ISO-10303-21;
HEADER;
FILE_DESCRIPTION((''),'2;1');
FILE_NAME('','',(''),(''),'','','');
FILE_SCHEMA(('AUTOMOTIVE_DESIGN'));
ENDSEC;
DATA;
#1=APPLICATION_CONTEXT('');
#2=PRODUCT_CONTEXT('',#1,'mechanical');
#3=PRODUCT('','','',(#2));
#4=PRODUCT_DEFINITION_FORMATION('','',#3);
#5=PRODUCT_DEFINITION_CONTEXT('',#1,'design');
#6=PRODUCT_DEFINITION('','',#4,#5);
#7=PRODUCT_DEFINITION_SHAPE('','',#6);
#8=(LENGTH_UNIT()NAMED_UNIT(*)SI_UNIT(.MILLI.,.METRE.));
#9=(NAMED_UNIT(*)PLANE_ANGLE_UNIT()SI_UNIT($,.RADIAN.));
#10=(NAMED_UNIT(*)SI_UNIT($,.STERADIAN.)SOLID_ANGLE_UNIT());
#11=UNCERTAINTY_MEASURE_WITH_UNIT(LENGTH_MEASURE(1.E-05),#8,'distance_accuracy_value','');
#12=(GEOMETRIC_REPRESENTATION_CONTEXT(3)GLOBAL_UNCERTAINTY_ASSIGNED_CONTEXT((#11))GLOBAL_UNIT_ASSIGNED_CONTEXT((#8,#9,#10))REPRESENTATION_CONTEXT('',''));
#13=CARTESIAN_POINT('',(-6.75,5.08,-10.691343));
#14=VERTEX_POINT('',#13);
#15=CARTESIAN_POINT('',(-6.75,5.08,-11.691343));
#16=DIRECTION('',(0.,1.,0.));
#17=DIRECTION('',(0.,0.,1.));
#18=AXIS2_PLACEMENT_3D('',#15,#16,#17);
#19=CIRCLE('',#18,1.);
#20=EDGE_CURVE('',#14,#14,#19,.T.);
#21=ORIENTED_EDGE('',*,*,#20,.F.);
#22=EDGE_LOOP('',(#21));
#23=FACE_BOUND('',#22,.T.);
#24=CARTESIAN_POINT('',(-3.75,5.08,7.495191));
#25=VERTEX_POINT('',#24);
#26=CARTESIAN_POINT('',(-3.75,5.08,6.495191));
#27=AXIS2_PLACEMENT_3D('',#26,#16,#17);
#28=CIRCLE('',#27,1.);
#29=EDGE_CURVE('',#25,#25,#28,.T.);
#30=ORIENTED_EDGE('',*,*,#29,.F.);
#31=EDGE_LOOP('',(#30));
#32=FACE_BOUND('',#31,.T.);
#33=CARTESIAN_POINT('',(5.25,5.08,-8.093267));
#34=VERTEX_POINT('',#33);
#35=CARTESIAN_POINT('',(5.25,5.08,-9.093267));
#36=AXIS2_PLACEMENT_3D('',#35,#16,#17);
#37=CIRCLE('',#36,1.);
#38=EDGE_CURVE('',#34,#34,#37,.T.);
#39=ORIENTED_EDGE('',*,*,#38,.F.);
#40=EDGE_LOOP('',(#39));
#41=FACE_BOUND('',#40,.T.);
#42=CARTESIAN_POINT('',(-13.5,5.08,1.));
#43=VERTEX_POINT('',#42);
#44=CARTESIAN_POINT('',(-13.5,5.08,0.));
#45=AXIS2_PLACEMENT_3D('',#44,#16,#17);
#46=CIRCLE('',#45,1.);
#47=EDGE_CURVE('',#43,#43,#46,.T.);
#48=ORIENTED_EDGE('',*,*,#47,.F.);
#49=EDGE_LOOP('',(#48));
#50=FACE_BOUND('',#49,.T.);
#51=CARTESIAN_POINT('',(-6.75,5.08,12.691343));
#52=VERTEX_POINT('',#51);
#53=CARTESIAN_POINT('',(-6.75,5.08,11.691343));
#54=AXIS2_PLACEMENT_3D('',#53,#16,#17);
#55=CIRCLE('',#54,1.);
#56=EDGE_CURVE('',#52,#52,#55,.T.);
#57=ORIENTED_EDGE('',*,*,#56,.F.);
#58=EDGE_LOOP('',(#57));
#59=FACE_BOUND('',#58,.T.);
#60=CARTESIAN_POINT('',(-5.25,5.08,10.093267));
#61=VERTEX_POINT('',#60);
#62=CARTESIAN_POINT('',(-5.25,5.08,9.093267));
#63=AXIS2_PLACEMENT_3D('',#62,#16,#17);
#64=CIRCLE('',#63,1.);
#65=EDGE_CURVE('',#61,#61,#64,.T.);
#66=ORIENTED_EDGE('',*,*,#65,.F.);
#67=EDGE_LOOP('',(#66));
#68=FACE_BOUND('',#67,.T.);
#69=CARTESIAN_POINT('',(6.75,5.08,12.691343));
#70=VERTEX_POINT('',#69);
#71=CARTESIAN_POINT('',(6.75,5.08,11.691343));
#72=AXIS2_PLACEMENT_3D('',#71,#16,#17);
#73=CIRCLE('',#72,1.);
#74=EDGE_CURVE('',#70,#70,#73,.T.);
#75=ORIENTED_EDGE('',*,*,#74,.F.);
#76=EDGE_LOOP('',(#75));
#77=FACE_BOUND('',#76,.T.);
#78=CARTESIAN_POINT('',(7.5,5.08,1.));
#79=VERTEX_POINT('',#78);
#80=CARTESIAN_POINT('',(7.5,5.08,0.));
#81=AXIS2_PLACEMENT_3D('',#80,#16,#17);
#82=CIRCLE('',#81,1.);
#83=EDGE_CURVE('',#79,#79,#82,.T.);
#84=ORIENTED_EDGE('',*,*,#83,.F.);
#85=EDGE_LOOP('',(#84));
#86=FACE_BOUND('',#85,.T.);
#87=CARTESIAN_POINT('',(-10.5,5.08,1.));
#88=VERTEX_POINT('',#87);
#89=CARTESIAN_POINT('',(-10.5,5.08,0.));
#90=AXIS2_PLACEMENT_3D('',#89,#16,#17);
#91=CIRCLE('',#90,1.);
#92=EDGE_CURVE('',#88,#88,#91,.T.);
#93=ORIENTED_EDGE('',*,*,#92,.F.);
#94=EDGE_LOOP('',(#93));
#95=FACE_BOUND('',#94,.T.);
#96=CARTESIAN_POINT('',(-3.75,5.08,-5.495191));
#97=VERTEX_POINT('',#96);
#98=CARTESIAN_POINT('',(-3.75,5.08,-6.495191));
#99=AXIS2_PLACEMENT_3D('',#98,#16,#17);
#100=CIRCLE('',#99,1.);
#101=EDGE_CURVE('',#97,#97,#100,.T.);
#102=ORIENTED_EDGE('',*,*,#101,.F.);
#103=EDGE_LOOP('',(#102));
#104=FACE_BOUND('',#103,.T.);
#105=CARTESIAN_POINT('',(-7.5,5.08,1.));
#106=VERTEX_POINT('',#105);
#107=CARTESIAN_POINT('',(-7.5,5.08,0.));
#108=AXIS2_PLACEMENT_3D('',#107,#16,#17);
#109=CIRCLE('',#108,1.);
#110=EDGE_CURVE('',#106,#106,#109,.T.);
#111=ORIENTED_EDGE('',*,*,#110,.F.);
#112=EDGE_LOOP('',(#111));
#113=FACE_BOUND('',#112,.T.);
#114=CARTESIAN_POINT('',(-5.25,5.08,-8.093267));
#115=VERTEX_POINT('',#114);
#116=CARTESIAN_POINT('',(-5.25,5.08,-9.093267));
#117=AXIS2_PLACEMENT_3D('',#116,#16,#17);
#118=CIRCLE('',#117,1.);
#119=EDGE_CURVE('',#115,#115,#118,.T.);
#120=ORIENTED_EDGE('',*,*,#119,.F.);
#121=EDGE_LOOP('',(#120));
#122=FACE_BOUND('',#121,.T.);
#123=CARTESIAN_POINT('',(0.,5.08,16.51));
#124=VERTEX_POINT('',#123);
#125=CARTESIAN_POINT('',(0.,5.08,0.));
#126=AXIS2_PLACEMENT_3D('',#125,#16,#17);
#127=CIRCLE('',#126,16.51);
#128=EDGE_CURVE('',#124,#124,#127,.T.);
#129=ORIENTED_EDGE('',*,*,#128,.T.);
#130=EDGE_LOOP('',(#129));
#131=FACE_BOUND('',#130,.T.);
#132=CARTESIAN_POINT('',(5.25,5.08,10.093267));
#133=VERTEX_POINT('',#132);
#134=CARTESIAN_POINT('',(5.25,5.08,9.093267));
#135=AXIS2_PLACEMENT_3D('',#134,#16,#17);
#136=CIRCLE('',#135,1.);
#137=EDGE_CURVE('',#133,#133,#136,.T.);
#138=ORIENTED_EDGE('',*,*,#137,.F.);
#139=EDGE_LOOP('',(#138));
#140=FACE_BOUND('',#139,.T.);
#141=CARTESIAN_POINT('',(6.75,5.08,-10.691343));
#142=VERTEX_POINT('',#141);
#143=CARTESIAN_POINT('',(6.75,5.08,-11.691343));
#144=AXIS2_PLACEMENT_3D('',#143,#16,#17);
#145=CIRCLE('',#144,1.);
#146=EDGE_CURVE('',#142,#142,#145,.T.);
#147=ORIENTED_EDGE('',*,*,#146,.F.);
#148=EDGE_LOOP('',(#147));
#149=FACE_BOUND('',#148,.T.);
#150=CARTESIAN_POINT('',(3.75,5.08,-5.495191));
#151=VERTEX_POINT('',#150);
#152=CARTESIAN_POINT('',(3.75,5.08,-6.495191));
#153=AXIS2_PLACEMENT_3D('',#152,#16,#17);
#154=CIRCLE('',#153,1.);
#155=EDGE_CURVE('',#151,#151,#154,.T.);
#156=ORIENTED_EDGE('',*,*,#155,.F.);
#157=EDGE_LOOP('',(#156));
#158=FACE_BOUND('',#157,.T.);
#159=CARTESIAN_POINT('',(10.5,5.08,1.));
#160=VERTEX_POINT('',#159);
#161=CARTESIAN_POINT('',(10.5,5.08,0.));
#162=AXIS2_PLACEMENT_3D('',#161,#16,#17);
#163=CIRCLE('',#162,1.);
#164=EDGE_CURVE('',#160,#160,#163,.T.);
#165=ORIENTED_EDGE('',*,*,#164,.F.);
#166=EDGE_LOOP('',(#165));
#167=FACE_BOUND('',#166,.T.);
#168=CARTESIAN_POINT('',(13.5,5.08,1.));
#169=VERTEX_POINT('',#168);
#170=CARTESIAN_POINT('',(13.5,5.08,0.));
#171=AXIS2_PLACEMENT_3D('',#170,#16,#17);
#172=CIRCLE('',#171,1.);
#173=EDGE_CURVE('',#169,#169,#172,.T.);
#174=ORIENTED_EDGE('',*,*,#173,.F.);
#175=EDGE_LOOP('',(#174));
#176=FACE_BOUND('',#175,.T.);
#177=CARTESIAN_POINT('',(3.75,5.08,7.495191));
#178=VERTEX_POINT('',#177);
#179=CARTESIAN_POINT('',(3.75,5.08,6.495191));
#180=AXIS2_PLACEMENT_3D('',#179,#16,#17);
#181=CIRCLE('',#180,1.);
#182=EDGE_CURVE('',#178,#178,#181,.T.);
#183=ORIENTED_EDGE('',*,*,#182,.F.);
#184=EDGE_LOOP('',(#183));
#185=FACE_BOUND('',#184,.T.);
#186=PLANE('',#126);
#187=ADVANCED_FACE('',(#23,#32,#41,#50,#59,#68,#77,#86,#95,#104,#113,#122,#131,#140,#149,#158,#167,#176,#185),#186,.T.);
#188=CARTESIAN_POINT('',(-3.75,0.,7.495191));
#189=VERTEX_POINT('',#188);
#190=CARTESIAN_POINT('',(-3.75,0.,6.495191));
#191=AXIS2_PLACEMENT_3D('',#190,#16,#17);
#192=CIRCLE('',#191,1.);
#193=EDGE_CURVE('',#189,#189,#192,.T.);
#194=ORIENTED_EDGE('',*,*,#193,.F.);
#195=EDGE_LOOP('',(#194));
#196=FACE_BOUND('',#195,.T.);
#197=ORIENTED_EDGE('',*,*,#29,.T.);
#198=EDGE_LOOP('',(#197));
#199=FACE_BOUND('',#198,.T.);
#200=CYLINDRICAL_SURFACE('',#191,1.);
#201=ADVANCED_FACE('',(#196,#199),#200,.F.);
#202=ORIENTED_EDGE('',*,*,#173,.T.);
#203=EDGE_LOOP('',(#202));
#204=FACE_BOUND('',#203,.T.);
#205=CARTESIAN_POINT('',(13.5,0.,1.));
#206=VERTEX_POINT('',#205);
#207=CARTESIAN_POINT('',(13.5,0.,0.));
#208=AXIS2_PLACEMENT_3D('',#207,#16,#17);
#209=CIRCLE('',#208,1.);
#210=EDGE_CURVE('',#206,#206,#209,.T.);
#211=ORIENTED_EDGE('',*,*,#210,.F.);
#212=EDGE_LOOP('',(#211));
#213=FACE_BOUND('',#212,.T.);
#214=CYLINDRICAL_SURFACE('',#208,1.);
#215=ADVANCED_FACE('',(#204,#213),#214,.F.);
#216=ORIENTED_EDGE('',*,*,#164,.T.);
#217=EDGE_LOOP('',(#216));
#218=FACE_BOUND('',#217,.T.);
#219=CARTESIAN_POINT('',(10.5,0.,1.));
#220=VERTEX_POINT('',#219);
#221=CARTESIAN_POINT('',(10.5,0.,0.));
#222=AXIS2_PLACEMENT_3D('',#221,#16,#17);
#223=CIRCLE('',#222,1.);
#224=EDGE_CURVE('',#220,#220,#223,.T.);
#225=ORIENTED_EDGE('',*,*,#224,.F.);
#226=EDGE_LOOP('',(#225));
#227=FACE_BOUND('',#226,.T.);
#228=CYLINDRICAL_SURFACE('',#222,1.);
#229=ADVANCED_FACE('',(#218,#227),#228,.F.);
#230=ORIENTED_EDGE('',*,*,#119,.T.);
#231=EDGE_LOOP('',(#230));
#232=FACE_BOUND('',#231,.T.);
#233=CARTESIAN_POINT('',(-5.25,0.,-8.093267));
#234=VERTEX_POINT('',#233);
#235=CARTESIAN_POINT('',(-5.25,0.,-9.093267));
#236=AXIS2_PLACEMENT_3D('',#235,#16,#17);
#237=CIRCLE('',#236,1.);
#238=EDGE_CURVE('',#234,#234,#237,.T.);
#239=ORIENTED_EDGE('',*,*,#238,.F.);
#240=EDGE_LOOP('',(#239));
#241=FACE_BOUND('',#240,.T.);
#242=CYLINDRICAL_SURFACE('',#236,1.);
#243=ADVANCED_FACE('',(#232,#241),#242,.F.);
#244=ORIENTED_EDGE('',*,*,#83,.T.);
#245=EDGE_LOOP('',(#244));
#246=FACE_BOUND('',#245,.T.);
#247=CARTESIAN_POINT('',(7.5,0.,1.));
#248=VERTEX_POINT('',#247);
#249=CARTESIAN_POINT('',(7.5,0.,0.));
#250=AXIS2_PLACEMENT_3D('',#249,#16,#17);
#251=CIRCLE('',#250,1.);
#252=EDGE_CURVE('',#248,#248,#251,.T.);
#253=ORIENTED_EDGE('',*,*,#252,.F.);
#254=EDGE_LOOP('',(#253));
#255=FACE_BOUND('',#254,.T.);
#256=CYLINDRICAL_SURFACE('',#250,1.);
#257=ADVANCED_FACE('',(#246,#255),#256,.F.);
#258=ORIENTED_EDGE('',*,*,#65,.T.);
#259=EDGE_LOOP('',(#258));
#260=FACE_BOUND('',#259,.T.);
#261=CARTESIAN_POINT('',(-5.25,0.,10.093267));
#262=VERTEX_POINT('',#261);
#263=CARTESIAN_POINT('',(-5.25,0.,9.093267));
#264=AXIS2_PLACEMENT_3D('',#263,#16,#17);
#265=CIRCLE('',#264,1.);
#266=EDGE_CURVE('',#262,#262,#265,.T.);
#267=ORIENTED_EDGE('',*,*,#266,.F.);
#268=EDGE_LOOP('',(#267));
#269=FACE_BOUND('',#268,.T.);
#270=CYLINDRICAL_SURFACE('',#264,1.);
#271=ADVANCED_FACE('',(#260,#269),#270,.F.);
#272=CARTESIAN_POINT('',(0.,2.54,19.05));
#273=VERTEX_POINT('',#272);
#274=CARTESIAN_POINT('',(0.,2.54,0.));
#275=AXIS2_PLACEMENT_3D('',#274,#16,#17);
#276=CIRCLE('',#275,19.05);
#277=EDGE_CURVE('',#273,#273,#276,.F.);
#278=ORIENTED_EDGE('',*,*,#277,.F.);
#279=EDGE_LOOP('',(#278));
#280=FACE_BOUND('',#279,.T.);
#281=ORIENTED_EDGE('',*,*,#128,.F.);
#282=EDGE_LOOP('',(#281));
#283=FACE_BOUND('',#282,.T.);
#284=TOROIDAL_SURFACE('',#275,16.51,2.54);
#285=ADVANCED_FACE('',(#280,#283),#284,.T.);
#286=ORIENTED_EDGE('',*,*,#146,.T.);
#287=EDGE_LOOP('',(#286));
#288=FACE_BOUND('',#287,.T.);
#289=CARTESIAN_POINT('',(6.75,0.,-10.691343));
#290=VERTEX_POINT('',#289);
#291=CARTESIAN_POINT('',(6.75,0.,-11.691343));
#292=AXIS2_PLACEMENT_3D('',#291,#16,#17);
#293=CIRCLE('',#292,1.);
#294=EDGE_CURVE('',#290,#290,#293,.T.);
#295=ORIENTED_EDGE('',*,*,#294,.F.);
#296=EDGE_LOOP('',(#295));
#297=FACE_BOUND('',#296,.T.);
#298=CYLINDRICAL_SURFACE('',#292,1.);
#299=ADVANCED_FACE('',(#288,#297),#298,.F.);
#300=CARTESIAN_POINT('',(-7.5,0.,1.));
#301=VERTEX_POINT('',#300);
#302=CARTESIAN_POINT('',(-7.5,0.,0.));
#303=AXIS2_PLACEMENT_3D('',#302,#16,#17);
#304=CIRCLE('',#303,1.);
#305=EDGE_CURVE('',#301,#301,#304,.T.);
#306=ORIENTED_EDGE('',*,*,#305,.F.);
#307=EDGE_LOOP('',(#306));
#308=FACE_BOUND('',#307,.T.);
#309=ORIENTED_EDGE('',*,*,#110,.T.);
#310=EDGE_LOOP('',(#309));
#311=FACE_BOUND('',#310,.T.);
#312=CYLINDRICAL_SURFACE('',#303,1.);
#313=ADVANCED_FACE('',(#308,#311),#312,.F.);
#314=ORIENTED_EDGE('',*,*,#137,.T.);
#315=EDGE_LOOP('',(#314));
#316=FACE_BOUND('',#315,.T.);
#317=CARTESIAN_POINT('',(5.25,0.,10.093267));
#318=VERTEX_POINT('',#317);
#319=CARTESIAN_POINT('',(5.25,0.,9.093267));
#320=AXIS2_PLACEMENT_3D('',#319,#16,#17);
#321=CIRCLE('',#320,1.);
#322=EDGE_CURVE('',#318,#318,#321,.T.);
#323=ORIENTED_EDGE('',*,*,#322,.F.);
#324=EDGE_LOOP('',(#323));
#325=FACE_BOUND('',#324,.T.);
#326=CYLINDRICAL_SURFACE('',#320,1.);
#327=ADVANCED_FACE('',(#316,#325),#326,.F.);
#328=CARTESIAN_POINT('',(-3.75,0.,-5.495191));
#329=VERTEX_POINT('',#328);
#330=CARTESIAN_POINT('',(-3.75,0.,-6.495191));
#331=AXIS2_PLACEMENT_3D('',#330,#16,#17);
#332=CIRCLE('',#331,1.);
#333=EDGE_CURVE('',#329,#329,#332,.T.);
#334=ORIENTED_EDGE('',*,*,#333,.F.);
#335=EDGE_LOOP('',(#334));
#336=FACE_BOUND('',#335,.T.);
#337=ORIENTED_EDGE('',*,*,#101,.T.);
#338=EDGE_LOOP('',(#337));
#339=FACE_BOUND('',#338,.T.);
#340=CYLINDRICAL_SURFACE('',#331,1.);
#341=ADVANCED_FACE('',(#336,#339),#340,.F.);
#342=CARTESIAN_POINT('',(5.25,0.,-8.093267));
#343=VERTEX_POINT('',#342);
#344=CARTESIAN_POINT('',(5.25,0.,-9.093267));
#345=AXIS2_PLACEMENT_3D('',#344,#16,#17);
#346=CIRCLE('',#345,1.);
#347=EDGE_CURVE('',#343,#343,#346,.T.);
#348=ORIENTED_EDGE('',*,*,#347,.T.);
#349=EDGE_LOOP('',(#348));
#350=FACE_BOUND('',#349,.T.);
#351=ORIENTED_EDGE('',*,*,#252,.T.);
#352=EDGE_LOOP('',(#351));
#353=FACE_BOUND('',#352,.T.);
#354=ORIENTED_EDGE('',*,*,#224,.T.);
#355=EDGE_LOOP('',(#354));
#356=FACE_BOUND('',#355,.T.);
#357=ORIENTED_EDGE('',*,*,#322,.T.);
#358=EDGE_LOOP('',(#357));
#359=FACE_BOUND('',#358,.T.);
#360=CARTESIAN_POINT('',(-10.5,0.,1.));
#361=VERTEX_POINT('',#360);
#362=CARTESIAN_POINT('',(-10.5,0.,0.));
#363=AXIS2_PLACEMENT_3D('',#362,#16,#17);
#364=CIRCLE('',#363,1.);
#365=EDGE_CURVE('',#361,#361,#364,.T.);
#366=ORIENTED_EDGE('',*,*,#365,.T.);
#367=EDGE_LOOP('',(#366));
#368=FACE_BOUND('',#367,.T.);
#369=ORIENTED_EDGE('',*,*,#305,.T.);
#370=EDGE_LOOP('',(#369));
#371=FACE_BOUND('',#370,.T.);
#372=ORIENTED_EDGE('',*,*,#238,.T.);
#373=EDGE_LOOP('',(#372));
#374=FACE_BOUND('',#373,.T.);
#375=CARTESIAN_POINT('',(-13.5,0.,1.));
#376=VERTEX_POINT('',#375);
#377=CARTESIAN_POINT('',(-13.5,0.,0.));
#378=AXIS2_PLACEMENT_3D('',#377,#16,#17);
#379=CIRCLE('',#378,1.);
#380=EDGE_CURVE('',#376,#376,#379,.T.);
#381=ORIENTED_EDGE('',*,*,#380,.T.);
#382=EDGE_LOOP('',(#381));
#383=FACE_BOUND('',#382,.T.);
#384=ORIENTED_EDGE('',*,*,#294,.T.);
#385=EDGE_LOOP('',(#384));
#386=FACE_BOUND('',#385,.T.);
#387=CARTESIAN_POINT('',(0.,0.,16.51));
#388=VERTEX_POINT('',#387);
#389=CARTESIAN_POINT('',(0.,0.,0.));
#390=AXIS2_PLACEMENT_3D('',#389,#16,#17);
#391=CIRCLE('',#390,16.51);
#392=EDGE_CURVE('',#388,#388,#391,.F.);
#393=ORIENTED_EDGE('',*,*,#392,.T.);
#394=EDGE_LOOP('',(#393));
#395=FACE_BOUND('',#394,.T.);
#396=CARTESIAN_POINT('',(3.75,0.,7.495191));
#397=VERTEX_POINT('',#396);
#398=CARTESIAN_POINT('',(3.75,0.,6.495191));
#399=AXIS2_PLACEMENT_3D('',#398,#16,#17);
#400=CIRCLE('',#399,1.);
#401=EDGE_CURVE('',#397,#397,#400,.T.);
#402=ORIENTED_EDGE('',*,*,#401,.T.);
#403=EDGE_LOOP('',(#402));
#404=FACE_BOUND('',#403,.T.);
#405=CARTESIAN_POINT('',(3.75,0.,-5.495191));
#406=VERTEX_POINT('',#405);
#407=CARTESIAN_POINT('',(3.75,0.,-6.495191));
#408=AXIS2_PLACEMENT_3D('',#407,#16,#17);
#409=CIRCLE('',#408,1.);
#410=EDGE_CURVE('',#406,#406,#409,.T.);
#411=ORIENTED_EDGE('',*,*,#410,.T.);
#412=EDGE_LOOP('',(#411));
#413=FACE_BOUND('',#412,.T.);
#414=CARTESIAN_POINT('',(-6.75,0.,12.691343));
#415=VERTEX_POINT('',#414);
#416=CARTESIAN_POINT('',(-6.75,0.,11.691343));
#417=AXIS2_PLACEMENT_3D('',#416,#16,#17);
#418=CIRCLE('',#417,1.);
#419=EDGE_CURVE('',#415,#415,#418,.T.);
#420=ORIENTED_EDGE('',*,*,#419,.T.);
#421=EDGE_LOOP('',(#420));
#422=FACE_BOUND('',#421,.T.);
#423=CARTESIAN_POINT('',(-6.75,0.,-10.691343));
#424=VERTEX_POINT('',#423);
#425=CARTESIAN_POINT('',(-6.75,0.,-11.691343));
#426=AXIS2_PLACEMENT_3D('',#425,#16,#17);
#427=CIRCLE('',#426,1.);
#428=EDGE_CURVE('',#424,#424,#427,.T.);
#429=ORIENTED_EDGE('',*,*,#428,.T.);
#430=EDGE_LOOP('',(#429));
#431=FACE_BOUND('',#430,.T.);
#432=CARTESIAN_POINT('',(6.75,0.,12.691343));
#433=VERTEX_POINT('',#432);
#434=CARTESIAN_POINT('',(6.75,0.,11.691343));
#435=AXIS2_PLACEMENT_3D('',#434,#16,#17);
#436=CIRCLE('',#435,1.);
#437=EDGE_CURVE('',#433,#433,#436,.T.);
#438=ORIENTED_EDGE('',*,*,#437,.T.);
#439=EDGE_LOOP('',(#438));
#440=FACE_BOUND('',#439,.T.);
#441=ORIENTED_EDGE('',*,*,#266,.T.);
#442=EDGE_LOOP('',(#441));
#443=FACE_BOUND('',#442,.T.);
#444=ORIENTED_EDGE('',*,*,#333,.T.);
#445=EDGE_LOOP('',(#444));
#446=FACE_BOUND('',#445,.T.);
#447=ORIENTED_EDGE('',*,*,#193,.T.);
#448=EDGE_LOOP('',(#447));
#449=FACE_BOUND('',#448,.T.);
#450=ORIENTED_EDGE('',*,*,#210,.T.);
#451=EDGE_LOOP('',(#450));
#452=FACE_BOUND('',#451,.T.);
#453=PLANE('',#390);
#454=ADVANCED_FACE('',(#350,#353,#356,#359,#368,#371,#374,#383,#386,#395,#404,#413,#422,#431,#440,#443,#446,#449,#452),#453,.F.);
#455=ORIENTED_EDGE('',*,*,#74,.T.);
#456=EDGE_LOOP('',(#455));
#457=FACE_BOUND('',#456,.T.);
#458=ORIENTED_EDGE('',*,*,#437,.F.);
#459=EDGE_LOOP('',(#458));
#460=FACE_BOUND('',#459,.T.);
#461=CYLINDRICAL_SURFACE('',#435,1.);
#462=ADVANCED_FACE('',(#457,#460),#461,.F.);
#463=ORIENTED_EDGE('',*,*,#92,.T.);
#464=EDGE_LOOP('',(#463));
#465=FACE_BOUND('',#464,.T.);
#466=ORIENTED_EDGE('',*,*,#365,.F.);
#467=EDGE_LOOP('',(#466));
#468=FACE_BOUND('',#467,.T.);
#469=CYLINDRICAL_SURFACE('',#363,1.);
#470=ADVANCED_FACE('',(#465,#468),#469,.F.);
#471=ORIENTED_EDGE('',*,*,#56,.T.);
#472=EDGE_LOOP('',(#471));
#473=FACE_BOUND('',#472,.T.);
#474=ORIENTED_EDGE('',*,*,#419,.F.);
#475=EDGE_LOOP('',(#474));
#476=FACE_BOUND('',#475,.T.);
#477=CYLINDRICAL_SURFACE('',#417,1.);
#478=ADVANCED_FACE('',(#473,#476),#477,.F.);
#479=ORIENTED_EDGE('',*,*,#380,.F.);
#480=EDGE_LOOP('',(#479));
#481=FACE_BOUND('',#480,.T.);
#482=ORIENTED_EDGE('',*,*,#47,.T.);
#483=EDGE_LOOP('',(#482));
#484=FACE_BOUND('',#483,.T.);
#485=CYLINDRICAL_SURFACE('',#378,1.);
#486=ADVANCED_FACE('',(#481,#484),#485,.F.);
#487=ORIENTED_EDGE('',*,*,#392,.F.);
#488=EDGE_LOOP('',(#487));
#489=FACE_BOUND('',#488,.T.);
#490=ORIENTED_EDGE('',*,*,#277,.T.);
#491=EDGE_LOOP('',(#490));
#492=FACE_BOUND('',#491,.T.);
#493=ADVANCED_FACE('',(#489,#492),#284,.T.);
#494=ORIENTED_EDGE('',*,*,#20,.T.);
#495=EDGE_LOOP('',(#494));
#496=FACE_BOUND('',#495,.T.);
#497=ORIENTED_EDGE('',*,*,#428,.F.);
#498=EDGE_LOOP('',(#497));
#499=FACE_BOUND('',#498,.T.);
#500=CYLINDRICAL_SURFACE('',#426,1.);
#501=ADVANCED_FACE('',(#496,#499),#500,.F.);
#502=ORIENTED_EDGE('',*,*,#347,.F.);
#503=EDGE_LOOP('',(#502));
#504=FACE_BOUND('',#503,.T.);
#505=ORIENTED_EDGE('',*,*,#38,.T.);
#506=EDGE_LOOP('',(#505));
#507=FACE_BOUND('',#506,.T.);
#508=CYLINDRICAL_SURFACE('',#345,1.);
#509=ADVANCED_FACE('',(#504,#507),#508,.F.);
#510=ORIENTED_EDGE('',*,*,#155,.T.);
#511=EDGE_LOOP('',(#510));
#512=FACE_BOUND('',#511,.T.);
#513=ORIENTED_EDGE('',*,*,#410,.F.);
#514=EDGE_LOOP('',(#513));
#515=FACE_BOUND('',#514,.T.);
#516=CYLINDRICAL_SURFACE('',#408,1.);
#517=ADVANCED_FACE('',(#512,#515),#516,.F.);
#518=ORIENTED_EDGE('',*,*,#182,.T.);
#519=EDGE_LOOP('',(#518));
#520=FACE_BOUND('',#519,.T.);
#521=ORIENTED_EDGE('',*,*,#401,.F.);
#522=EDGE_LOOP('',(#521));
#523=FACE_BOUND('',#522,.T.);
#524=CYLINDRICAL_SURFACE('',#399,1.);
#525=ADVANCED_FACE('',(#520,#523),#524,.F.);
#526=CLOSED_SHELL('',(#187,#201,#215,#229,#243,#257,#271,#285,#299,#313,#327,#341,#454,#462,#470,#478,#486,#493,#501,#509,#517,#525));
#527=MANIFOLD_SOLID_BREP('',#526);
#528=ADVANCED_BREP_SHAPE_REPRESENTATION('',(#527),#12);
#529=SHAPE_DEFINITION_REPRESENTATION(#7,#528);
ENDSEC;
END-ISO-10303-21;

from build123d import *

# Parameters (mm, degrees)
SKETCH2_R           = 19.05
BOSS_EXTRUDE1_DEPTH = 5.08
SKETCH3_R           = 1
CUT_EXTRUDE1_DEPTH  = 28.415532094
FILLET1_R           = 2.54


with BuildPart() as part:
    # Sketch2 → Boss-Extrude1 (new body)
    with BuildSketch(Plane(origin=(0, 0, 0), x_dir=(1, 0, 0), z_dir=(0, 1, 0))):
        with Locations(Location((0, 0, 0), (0, 0, 270))):
            Circle(SKETCH2_R)
    extrude(amount=BOSS_EXTRUDE1_DEPTH)

    # Sketch3 → Cut-Extrude1 (cut, through all)
    with BuildSketch(Plane(origin=(0, 5.08, 0), x_dir=(1, 0, 0), z_dir=(0, 1, 0))):
        with Locations(Location((-6.75, -11.691342951, 0), (0, 0, 270))):
            Circle(SKETCH3_R)
        with Locations(Location((-5.25, -9.09326674, 0), (0, 0, 270))):
            Circle(SKETCH3_R)
        with Locations(Location((-3.75, -6.495190528, 0), (0, 0, 270))):
            Circle(SKETCH3_R)
        with Locations(Location((-13.5, 0, 0), (0, 0, 270))):
            Circle(SKETCH3_R)
        with Locations(Location((-10.5, 0, 0), (0, 0, 270))):
            Circle(SKETCH3_R)
        with Locations(Location((-7.5, 0, 0), (0, 0, 270))):
            Circle(SKETCH3_R)
        with Locations(Location((-3.75, 6.495190528, 0), (0, 0, 270))):
            Circle(SKETCH3_R)
        with Locations(Location((-5.25, 9.09326674, 0), (0, 0, 270))):
            Circle(SKETCH3_R)
        with Locations(Location((-6.75, 11.691342951, 0), (0, 0, 270))):
            Circle(SKETCH3_R)
        with Locations(Location((6.75, 11.691342951, 0), (0, 0, 270))):
            Circle(SKETCH3_R)
        with Locations(Location((5.25, 9.09326674, 0), (0, 0, 270))):
            Circle(SKETCH3_R)
        with Locations(Location((3.75, 6.495190528, 0), (0, 0, 270))):
            Circle(SKETCH3_R)
        with Locations(Location((13.5, 0, 0), (0, 0, 270))):
            Circle(SKETCH3_R)
        with Locations(Location((10.5, 0, 0), (0, 0, 270))):
            Circle(SKETCH3_R)
        with Locations(Location((7.5, 0, 0), (0, 0, 270))):
            Circle(SKETCH3_R)
        with Locations(Location((3.75, -6.495190528, 0), (0, 0, 270))):
            Circle(SKETCH3_R)
        with Locations(Location((5.25, -9.09326674, 0), (0, 0, 270))):
            Circle(SKETCH3_R)
        with Locations(Location((6.75, -11.691342951, 0), (0, 0, 270))):
            Circle(SKETCH3_R)
    extrude(amount=-CUT_EXTRUDE1_DEPTH, mode=Mode.SUBTRACT)

    # Fillet1
    fillet1_edges = [part.edges().sort_by_distance(p)[0] for p in [
        (0, 0, -19.05),
        (0, 5.08, -19.05),
    ]]
    fillet(fillet1_edges, radius=FILLET1_R - 0.0001)  # a hair under: the kernel refuses the full size


solid = part.part
